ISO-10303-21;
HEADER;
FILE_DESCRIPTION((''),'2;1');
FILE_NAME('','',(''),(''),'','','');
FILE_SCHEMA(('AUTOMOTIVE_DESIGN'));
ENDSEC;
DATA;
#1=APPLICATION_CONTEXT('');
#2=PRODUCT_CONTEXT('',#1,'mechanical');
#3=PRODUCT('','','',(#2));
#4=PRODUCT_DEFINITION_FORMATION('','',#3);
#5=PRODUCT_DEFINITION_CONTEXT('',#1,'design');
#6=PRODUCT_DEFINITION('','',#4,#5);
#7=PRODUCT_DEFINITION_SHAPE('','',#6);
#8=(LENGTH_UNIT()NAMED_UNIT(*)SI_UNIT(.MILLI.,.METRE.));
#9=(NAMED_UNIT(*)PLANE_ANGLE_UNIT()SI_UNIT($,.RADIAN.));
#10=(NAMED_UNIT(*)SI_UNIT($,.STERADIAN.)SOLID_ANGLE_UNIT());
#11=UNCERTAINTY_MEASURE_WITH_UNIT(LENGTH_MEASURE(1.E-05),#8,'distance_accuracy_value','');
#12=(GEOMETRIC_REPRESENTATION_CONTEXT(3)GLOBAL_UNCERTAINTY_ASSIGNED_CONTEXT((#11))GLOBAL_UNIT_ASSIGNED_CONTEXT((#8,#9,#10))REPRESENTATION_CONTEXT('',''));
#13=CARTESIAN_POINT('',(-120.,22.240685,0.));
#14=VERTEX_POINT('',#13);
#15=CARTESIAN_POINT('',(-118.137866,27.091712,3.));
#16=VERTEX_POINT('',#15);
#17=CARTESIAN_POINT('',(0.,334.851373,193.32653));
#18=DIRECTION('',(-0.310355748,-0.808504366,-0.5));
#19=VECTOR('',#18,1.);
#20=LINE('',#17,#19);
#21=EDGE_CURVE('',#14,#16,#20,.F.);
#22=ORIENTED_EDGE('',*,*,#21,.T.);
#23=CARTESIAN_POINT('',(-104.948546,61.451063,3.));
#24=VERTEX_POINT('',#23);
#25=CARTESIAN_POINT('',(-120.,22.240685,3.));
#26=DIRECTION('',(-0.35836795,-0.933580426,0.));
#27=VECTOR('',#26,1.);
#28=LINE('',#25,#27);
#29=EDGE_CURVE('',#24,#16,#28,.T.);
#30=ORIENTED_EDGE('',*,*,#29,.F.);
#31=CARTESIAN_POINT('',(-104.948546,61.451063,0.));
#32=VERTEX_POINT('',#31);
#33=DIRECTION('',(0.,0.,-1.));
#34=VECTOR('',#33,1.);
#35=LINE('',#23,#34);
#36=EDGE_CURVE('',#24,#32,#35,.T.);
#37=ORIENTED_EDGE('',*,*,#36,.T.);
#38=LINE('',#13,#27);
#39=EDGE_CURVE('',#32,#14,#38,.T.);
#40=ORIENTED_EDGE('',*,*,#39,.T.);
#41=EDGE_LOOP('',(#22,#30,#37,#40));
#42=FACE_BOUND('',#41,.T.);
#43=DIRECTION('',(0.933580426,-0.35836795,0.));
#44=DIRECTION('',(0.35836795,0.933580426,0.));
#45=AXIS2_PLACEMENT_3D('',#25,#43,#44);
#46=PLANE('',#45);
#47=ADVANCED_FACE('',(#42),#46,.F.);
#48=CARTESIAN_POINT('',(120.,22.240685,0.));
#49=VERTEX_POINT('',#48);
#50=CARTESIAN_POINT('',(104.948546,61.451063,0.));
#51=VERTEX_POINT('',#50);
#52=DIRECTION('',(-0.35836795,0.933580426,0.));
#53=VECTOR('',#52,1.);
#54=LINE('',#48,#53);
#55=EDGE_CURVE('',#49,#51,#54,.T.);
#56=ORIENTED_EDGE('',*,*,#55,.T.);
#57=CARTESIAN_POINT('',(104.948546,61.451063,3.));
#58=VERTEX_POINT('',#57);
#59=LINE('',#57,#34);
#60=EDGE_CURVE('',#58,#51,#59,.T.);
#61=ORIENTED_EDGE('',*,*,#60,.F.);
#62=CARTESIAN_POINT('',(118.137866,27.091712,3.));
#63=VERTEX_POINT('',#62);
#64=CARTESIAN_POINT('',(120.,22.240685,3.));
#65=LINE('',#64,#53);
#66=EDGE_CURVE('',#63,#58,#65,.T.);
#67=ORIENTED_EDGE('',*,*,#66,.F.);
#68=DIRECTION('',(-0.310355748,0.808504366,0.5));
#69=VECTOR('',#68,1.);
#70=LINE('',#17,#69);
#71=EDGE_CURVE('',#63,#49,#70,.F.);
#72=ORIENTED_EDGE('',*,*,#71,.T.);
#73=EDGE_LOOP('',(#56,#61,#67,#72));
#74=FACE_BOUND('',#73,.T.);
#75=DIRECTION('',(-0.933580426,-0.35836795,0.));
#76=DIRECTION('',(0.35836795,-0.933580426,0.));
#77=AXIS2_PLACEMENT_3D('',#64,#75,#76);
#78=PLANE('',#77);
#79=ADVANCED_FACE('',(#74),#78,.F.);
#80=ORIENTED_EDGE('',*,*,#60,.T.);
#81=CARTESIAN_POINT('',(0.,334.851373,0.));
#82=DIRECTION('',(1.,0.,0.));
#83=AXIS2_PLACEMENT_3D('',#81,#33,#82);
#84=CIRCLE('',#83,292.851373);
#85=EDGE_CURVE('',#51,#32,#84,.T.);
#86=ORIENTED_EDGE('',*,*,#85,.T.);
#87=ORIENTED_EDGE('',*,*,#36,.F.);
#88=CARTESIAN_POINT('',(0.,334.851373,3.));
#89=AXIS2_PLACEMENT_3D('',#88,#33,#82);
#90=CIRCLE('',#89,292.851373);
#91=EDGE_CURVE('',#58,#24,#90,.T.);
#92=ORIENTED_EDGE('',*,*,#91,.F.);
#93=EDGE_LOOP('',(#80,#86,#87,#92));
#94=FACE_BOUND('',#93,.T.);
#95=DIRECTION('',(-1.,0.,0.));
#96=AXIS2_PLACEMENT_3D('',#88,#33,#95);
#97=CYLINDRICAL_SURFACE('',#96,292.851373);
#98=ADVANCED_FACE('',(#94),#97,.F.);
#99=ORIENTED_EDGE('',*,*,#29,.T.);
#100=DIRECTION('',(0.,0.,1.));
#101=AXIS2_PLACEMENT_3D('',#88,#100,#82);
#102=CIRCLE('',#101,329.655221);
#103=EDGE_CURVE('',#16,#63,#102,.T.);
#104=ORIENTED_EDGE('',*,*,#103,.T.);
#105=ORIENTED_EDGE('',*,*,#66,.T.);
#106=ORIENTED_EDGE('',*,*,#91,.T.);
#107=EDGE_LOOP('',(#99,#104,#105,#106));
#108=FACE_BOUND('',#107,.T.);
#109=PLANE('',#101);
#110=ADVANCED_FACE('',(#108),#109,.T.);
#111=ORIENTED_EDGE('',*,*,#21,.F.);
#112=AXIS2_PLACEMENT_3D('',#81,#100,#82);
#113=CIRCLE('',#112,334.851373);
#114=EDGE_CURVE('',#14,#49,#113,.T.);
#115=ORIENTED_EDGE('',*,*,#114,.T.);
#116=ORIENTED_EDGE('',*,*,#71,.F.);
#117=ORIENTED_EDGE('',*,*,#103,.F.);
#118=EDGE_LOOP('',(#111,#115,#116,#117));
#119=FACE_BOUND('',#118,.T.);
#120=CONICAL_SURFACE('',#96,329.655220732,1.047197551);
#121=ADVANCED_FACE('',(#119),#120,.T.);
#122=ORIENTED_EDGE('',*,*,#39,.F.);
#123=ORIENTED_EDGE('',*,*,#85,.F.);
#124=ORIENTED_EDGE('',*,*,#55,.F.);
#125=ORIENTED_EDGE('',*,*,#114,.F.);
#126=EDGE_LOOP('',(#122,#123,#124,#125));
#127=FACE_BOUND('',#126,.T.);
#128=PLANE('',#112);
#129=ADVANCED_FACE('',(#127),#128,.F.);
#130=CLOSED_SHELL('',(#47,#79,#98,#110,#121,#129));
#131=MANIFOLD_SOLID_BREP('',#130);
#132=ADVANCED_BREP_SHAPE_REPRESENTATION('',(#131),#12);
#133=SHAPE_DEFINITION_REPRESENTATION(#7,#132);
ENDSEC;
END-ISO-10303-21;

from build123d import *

# Parameters (mm, degrees)
BOSS_EXTRU_1_DEPTH = 3
CHANFREIN1_SIZE2   = 5.196152423
CHANFREIN1_SIZE    = 3


with BuildPart() as part:
    # Esquisse1 → Boss.-Extru.1 (new body)
    with BuildSketch(Plane.XY):
        with BuildLine():
            Line((-120, 22.240685392), (-104.948546119, 61.451063305))
            ThreePointArc((-104.948546119, 61.451063305), (0, 42), (104.948546119, 61.451063305))
            Line((104.948546119, 61.451063305), (120, 22.240685392))
            ThreePointArc((120, 22.240685392), (0, 0), (-120, 22.240685392))
        make_face()
    extrude(amount=BOSS_EXTRU_1_DEPTH)

    # Chanfrein1
    chanfrein1_edges = [part.edges().sort_by_distance(p)[0] for p in [
        (0, 0, 3),
    ]]
    chanfrein1_side = [part.faces().sort_by_distance(p)[0] for p in [
        (0, 0, 2.94),
    ]]
    chamfer(chanfrein1_edges, length=CHANFREIN1_SIZE - 0.0001, length2=CHANFREIN1_SIZE2 - 0.0001, reference=chanfrein1_side[0])  # a hair under: the kernel refuses the full size


solid = part.part
